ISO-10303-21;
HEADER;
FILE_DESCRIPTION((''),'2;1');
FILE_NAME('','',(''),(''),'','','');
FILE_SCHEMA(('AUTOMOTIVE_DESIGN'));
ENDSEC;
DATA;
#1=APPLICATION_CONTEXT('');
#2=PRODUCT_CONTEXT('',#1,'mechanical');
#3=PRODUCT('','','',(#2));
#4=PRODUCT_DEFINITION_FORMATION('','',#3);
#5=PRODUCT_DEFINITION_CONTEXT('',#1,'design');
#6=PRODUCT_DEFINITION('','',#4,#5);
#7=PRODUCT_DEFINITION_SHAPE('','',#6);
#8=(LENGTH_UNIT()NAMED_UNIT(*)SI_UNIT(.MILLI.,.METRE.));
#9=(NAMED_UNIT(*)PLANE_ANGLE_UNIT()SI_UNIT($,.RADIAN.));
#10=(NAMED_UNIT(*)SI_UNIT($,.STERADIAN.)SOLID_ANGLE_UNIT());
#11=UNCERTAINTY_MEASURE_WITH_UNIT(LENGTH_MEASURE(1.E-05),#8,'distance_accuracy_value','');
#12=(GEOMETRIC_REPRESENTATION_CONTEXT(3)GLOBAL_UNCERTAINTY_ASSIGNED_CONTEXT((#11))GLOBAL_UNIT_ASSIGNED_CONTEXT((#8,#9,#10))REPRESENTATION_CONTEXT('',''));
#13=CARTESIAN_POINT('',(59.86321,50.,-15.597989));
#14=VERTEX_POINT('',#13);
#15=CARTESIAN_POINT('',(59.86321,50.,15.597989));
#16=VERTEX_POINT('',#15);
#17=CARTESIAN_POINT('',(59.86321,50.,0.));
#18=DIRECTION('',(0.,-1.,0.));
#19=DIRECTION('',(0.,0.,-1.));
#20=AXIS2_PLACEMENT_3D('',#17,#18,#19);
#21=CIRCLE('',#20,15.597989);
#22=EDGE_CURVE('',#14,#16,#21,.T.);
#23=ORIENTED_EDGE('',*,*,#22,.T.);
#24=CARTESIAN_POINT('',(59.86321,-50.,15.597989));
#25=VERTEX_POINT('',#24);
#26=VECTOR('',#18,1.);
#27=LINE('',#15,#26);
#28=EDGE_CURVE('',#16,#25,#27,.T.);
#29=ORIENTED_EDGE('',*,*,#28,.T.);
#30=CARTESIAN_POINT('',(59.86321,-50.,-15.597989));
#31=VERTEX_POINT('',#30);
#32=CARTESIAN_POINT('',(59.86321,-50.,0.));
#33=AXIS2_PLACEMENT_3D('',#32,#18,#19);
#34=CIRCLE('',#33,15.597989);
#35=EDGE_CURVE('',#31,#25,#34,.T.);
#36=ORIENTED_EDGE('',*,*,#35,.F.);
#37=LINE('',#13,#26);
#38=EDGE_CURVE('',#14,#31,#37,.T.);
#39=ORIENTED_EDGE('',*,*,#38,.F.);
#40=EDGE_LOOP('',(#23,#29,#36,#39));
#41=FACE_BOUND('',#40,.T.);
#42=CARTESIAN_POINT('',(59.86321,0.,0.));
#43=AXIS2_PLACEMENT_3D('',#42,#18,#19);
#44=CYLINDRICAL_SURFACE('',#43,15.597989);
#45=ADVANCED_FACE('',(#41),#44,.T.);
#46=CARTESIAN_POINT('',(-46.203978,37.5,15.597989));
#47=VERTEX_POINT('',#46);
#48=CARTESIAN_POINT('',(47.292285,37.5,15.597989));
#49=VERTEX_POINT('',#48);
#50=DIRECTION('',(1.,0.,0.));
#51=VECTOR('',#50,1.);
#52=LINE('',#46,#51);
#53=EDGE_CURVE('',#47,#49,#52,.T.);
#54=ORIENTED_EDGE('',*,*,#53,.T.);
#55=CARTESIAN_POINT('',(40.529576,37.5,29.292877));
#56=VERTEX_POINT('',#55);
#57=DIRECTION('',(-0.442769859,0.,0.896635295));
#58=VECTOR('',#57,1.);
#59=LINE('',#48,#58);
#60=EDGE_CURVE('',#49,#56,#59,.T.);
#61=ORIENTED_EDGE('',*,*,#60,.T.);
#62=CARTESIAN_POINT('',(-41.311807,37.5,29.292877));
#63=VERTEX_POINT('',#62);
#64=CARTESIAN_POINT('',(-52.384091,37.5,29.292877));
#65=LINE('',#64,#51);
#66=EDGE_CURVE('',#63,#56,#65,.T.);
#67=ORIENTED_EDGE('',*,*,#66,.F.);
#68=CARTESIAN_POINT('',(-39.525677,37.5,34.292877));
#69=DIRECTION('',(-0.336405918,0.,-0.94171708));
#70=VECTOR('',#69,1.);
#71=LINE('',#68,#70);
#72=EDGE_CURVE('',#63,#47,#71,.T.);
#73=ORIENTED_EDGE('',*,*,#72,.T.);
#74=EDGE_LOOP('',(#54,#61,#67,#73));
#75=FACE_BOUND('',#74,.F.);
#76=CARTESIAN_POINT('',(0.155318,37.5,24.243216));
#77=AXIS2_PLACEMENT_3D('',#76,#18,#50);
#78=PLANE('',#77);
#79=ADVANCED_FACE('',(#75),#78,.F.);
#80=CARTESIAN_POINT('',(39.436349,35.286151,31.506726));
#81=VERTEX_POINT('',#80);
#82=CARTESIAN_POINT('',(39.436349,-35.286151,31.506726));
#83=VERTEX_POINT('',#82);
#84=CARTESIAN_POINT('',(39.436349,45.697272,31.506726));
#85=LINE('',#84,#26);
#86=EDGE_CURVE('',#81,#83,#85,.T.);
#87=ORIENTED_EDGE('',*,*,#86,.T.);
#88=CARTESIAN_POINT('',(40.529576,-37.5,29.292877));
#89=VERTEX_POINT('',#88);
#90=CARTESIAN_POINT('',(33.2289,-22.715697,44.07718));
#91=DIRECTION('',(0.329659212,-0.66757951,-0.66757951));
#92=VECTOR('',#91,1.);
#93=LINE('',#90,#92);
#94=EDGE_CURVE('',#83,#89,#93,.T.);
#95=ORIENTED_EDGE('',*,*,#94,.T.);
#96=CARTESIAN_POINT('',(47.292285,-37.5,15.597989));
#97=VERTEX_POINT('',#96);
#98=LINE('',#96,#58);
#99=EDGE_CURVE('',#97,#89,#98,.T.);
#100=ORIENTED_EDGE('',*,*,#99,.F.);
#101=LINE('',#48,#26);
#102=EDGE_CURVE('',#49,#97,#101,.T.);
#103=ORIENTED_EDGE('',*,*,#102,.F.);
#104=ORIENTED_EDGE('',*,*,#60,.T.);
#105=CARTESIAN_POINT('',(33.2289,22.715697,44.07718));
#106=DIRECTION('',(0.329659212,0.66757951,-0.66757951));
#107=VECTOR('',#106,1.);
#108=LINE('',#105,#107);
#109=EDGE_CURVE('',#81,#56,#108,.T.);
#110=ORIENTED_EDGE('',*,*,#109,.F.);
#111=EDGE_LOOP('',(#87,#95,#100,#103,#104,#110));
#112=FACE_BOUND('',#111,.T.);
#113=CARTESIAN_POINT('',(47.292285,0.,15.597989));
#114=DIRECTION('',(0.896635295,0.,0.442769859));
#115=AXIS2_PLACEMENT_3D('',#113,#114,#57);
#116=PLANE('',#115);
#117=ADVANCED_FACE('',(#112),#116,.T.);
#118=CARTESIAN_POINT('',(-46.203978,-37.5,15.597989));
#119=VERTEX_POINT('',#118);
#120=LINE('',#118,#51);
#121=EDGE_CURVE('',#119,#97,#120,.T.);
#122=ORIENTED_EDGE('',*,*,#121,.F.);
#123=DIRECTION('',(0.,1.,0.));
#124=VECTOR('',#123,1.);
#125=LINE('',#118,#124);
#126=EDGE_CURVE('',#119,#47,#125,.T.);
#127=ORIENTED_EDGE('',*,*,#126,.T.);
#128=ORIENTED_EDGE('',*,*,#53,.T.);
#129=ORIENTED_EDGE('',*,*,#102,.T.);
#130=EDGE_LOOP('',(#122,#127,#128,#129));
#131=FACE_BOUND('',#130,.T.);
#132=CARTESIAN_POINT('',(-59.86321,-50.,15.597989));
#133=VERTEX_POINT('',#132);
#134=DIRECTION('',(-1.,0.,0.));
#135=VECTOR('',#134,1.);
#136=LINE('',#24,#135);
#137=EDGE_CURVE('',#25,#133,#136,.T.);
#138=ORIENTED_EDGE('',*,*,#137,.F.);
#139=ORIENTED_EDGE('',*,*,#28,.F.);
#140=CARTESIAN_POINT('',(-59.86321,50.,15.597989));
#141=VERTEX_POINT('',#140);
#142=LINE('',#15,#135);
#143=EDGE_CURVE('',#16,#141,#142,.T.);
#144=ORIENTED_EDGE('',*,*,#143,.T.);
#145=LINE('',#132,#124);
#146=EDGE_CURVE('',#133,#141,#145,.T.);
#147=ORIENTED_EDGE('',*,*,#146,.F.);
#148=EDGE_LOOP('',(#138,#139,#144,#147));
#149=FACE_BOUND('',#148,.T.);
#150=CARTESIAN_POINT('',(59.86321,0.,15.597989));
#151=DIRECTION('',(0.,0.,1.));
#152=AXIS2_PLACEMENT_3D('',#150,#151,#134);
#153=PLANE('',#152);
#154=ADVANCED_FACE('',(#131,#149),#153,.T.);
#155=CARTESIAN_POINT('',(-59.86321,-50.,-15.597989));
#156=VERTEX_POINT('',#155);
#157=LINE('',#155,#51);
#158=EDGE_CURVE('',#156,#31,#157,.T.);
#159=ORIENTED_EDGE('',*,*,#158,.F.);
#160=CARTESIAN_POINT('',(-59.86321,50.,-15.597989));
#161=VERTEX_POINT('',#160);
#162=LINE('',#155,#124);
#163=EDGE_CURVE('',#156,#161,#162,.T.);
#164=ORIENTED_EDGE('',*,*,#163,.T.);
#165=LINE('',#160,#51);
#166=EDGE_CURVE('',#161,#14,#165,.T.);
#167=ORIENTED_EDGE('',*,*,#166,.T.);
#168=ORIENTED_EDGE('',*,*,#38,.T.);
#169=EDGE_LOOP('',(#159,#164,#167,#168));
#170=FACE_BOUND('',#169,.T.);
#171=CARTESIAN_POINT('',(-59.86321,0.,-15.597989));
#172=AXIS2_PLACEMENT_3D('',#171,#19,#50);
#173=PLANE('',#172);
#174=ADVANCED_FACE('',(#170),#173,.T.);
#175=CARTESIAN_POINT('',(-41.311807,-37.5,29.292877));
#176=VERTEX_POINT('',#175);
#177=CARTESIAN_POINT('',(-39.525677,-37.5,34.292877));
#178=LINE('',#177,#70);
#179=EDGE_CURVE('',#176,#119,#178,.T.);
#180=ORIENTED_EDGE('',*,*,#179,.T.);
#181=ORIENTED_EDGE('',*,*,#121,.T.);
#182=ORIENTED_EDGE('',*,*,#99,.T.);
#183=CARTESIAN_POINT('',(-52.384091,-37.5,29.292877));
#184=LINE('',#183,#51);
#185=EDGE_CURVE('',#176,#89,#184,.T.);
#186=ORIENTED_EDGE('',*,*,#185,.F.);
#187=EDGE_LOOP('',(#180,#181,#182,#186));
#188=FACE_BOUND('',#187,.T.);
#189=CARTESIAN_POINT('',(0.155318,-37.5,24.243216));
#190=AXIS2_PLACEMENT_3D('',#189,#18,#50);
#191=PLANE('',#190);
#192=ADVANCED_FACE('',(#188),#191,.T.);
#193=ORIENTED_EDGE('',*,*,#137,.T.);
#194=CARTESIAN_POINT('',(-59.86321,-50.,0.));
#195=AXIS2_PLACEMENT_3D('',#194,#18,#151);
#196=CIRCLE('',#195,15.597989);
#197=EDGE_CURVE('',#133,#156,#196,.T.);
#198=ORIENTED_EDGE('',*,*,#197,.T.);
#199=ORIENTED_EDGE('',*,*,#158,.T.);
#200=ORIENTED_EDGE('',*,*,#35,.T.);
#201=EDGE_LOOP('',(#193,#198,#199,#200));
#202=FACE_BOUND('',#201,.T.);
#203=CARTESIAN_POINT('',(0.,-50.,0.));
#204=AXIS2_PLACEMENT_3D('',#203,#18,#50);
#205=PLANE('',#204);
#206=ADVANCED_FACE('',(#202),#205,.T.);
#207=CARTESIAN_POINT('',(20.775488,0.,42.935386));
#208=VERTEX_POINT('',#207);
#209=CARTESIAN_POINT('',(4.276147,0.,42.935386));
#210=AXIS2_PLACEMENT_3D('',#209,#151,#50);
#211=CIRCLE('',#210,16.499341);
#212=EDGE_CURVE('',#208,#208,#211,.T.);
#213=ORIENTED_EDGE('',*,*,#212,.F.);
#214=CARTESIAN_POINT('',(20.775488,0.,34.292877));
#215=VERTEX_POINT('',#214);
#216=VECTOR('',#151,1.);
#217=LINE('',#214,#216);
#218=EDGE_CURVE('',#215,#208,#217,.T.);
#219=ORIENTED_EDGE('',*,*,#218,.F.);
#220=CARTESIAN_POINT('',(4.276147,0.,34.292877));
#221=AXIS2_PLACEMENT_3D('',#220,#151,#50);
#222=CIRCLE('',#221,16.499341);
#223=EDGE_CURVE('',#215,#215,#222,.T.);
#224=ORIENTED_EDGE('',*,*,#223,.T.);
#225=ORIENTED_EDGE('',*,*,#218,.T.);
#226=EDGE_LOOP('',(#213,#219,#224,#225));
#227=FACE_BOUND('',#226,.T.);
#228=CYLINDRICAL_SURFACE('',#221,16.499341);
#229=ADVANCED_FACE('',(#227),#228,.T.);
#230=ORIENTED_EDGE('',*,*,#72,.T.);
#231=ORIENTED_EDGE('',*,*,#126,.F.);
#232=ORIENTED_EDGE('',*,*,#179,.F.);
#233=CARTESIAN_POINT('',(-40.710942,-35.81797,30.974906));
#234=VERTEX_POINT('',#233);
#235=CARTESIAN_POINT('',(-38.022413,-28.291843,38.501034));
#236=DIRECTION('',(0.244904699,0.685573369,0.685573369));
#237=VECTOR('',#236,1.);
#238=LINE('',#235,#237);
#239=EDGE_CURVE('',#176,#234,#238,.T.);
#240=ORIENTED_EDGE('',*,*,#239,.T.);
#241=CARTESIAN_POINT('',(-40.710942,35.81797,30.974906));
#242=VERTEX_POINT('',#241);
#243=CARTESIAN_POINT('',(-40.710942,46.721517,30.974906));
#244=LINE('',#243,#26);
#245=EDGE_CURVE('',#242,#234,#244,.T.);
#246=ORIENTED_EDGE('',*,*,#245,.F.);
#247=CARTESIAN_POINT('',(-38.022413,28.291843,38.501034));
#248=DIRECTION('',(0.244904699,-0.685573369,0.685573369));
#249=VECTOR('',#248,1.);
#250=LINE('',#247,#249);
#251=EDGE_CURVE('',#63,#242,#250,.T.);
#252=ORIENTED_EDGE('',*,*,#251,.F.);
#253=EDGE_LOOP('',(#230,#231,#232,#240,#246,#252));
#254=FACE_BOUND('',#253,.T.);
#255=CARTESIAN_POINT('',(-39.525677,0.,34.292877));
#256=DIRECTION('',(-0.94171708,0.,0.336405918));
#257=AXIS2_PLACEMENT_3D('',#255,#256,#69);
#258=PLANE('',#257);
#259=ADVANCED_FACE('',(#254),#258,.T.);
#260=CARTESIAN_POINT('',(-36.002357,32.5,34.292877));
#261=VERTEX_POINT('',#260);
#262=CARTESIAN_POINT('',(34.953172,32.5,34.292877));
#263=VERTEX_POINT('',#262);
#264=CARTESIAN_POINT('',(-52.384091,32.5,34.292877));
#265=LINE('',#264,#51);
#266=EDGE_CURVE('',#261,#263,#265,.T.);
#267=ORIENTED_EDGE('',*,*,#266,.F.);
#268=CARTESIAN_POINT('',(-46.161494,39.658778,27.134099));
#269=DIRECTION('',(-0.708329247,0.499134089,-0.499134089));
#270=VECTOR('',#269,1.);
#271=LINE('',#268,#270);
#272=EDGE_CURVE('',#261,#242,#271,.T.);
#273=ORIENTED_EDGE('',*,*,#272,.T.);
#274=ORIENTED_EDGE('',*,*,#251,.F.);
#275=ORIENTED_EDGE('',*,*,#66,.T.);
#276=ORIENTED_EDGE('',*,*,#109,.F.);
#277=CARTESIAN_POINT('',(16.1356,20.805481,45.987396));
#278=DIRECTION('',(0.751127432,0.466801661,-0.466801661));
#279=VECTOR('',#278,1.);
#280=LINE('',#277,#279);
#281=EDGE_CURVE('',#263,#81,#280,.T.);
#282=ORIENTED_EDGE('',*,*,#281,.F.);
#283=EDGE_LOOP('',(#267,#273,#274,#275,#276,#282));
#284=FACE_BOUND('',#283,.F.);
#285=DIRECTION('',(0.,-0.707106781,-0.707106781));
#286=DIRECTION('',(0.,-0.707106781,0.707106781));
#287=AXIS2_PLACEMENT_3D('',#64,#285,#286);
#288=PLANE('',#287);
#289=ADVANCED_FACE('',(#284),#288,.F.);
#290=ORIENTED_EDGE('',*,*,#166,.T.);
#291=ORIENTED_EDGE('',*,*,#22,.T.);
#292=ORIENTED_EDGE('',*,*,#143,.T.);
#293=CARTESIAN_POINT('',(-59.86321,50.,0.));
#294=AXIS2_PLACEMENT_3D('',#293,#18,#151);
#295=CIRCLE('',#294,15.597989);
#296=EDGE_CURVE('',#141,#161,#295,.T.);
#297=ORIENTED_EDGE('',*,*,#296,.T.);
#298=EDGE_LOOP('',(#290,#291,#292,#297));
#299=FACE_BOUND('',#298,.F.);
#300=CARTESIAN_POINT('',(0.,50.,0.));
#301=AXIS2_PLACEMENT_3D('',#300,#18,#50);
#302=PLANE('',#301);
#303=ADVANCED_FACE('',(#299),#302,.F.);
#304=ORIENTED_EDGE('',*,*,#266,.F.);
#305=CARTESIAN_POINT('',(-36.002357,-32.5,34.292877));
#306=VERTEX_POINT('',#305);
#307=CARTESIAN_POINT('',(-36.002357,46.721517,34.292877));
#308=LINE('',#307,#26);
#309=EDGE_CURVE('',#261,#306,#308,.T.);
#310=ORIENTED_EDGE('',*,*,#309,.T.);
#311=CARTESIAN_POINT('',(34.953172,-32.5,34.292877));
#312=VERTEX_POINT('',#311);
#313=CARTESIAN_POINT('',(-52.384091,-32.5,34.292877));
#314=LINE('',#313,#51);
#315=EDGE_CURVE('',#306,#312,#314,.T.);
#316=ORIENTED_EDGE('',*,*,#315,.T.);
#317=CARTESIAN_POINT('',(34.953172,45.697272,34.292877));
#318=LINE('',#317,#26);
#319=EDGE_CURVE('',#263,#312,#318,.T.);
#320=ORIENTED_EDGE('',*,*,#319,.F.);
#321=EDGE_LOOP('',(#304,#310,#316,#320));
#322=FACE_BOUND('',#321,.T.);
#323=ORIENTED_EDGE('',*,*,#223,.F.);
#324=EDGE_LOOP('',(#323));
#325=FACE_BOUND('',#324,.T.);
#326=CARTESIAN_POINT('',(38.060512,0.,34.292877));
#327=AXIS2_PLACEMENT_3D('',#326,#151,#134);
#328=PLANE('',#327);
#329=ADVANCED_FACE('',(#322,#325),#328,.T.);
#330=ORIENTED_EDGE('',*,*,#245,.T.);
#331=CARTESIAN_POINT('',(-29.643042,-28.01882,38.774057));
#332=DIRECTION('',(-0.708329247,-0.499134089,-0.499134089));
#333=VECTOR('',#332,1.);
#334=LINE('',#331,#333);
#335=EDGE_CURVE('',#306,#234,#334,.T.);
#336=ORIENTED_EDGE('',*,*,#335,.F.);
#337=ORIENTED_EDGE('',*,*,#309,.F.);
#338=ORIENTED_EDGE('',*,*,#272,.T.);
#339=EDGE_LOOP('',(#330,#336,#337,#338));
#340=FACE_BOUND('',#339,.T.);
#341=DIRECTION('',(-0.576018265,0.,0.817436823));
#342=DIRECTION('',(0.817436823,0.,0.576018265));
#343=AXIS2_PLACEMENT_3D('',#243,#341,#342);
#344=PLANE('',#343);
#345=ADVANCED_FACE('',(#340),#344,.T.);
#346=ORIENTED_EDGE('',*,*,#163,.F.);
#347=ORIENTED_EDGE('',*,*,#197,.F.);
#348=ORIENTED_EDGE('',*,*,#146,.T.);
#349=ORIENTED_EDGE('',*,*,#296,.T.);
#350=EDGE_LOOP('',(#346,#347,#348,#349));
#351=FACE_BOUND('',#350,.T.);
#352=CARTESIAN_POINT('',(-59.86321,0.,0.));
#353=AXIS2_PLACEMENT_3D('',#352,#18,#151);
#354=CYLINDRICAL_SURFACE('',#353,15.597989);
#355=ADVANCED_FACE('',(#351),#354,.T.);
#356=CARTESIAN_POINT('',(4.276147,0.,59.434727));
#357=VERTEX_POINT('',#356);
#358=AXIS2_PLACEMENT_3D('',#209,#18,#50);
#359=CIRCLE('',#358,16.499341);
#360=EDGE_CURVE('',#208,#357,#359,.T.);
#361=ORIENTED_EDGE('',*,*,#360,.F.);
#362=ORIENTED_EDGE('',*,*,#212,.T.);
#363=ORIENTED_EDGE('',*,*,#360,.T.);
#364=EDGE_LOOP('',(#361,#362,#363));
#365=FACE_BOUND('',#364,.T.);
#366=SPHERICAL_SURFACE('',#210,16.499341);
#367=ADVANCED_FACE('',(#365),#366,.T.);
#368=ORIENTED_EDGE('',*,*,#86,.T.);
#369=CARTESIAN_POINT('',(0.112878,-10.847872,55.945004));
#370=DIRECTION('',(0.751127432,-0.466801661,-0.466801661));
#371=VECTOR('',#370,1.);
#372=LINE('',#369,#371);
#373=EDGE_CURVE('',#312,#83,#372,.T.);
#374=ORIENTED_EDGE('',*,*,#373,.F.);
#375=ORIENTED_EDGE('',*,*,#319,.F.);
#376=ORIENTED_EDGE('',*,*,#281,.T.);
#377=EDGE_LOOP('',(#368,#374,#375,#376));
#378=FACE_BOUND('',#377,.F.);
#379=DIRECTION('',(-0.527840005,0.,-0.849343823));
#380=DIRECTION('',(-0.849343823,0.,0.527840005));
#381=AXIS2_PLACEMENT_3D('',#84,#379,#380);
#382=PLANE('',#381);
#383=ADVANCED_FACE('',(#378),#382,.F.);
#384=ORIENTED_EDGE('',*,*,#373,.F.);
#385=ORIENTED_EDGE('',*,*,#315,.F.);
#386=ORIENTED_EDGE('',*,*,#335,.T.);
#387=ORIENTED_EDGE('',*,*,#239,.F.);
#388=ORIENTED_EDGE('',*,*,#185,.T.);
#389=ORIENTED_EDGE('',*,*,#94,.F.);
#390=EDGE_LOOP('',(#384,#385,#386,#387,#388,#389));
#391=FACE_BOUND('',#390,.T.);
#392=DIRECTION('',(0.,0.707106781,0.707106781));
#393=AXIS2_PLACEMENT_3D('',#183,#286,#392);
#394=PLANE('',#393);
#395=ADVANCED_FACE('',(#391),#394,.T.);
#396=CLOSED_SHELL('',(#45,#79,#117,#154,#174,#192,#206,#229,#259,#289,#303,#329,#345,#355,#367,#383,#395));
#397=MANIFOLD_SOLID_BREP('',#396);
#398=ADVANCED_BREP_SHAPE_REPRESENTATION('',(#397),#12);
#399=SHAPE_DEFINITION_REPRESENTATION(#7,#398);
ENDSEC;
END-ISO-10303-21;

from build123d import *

# Parameters (mm, degrees)
F1_DEPTH    = 50
F2_DEPTH    = 37.5
F4_T1_DEPTH = 103.3030187921
F4_T3_DEPTH = 91.394543157
F4_T5_DEPTH = 93.4430330881


# Not quite as in the source:
# - a fillet or chamfer that OpenCascade refuses, or shapes differently, is made with other operations: its cross-section is extruded or revolved along the edge and cut away or added


with BuildPart() as f1:
    # F0 (on Front) → F1 (new body, symmetric)
    with BuildSketch(Plane.XZ):
        with BuildLine():
            Line((-59.8632097244, -15.5979888514), (59.8632097244, -15.5979888514))
            ThreePointArc((59.8632097244, -15.5979888514), (75.4611985758, 0), (59.8632097244, 15.5979888514))
            Line((59.8632097244, 15.5979888514), (47.2922846675, 15.5979888514))
            Line((47.2922846675, 15.5979888514), (-46.2039783597, 15.5979888514))
            Line((-46.2039783597, 15.5979888514), (-59.8632097244, 15.5979888514))
            ThreePointArc((-59.8632097244, 15.5979888514), (-75.4611985758, 0), (-59.8632097244, -15.5979888514))
        make_face()
    extrude(amount=F1_DEPTH, both=True)

    # F0 (on Front) → F2 (join, symmetric)
    with BuildSketch(Plane.XZ):
        Polygon((-46.2039783597, 15.5979888514), (47.2922846675, 15.5979888514), (38.0605123937, 34.2928767204), (20.7754876465, 34.2928767204), (4.2761466466, 34.2928767204), (-12.2231943533, 34.2928767204), (-39.5256765187, 34.2928767204), align=None)
    extrude(amount=F2_DEPTH, both=True)

    # F0 (on Front) → F3 (revolve)
    with BuildSketch(Plane.XZ):
        with BuildLine():
            Line((4.2761466466, 34.2928767204), (20.7754876465, 34.2928767204))
            Line((20.7754876465, 34.2928767204), (20.7754876465, 42.9353863001))
            ThreePointArc((20.7754876465, 42.9353863001), (15.9429425527, 54.6021822062), (4.2761466466, 59.4347273))
            Line((4.2761466466, 59.4347273), (4.2761466466, 42.9353863001))
            Line((4.2761466466, 42.9353863001), (4.2761466466, 34.2928767204))
        make_face()
    revolve(axis=Axis((4.2761466466, 0, 51.1850568), (0, 0, 1)))

    # F4: chamfer of 5 on 4 edges, made by hand

    # F4_s2 → F4_t1 (cut)
    with BuildSketch(Plane.YZ.offset(-52.3840914585)):
        Polygon((-37.5, 29.2928767204), (-32.5, 34.2928767204), (-37.5, 34.2928767204), align=None)
        Polygon((37.5, 29.2928767204), (32.5, 34.2928767204), (37.5, 34.2928767204), align=None)
    extrude(amount=F4_T1_DEPTH, mode=Mode.SUBTRACT)

    # F4_s4 → F4_t3 (cut)
    with BuildSketch(Plane.XZ.offset(-45.6972715785)):
        Polygon((39.4363488807, 31.506726013), (34.9531724053, 34.2928767204), (38.0605123937, 34.2928767204), align=None)
    extrude(amount=F4_T3_DEPTH, mode=Mode.SUBTRACT)

    # F4_s6 → F4_t5 (cut)
    with BuildSketch(Plane.XZ.offset(-46.7215165441)):
        Polygon((-40.7109421413, 30.9749063085), (-36.0023567418, 34.2928767204), (-39.5256765187, 34.2928767204), align=None)
    extrude(amount=F4_T5_DEPTH, mode=Mode.SUBTRACT)


solid = f1.part
